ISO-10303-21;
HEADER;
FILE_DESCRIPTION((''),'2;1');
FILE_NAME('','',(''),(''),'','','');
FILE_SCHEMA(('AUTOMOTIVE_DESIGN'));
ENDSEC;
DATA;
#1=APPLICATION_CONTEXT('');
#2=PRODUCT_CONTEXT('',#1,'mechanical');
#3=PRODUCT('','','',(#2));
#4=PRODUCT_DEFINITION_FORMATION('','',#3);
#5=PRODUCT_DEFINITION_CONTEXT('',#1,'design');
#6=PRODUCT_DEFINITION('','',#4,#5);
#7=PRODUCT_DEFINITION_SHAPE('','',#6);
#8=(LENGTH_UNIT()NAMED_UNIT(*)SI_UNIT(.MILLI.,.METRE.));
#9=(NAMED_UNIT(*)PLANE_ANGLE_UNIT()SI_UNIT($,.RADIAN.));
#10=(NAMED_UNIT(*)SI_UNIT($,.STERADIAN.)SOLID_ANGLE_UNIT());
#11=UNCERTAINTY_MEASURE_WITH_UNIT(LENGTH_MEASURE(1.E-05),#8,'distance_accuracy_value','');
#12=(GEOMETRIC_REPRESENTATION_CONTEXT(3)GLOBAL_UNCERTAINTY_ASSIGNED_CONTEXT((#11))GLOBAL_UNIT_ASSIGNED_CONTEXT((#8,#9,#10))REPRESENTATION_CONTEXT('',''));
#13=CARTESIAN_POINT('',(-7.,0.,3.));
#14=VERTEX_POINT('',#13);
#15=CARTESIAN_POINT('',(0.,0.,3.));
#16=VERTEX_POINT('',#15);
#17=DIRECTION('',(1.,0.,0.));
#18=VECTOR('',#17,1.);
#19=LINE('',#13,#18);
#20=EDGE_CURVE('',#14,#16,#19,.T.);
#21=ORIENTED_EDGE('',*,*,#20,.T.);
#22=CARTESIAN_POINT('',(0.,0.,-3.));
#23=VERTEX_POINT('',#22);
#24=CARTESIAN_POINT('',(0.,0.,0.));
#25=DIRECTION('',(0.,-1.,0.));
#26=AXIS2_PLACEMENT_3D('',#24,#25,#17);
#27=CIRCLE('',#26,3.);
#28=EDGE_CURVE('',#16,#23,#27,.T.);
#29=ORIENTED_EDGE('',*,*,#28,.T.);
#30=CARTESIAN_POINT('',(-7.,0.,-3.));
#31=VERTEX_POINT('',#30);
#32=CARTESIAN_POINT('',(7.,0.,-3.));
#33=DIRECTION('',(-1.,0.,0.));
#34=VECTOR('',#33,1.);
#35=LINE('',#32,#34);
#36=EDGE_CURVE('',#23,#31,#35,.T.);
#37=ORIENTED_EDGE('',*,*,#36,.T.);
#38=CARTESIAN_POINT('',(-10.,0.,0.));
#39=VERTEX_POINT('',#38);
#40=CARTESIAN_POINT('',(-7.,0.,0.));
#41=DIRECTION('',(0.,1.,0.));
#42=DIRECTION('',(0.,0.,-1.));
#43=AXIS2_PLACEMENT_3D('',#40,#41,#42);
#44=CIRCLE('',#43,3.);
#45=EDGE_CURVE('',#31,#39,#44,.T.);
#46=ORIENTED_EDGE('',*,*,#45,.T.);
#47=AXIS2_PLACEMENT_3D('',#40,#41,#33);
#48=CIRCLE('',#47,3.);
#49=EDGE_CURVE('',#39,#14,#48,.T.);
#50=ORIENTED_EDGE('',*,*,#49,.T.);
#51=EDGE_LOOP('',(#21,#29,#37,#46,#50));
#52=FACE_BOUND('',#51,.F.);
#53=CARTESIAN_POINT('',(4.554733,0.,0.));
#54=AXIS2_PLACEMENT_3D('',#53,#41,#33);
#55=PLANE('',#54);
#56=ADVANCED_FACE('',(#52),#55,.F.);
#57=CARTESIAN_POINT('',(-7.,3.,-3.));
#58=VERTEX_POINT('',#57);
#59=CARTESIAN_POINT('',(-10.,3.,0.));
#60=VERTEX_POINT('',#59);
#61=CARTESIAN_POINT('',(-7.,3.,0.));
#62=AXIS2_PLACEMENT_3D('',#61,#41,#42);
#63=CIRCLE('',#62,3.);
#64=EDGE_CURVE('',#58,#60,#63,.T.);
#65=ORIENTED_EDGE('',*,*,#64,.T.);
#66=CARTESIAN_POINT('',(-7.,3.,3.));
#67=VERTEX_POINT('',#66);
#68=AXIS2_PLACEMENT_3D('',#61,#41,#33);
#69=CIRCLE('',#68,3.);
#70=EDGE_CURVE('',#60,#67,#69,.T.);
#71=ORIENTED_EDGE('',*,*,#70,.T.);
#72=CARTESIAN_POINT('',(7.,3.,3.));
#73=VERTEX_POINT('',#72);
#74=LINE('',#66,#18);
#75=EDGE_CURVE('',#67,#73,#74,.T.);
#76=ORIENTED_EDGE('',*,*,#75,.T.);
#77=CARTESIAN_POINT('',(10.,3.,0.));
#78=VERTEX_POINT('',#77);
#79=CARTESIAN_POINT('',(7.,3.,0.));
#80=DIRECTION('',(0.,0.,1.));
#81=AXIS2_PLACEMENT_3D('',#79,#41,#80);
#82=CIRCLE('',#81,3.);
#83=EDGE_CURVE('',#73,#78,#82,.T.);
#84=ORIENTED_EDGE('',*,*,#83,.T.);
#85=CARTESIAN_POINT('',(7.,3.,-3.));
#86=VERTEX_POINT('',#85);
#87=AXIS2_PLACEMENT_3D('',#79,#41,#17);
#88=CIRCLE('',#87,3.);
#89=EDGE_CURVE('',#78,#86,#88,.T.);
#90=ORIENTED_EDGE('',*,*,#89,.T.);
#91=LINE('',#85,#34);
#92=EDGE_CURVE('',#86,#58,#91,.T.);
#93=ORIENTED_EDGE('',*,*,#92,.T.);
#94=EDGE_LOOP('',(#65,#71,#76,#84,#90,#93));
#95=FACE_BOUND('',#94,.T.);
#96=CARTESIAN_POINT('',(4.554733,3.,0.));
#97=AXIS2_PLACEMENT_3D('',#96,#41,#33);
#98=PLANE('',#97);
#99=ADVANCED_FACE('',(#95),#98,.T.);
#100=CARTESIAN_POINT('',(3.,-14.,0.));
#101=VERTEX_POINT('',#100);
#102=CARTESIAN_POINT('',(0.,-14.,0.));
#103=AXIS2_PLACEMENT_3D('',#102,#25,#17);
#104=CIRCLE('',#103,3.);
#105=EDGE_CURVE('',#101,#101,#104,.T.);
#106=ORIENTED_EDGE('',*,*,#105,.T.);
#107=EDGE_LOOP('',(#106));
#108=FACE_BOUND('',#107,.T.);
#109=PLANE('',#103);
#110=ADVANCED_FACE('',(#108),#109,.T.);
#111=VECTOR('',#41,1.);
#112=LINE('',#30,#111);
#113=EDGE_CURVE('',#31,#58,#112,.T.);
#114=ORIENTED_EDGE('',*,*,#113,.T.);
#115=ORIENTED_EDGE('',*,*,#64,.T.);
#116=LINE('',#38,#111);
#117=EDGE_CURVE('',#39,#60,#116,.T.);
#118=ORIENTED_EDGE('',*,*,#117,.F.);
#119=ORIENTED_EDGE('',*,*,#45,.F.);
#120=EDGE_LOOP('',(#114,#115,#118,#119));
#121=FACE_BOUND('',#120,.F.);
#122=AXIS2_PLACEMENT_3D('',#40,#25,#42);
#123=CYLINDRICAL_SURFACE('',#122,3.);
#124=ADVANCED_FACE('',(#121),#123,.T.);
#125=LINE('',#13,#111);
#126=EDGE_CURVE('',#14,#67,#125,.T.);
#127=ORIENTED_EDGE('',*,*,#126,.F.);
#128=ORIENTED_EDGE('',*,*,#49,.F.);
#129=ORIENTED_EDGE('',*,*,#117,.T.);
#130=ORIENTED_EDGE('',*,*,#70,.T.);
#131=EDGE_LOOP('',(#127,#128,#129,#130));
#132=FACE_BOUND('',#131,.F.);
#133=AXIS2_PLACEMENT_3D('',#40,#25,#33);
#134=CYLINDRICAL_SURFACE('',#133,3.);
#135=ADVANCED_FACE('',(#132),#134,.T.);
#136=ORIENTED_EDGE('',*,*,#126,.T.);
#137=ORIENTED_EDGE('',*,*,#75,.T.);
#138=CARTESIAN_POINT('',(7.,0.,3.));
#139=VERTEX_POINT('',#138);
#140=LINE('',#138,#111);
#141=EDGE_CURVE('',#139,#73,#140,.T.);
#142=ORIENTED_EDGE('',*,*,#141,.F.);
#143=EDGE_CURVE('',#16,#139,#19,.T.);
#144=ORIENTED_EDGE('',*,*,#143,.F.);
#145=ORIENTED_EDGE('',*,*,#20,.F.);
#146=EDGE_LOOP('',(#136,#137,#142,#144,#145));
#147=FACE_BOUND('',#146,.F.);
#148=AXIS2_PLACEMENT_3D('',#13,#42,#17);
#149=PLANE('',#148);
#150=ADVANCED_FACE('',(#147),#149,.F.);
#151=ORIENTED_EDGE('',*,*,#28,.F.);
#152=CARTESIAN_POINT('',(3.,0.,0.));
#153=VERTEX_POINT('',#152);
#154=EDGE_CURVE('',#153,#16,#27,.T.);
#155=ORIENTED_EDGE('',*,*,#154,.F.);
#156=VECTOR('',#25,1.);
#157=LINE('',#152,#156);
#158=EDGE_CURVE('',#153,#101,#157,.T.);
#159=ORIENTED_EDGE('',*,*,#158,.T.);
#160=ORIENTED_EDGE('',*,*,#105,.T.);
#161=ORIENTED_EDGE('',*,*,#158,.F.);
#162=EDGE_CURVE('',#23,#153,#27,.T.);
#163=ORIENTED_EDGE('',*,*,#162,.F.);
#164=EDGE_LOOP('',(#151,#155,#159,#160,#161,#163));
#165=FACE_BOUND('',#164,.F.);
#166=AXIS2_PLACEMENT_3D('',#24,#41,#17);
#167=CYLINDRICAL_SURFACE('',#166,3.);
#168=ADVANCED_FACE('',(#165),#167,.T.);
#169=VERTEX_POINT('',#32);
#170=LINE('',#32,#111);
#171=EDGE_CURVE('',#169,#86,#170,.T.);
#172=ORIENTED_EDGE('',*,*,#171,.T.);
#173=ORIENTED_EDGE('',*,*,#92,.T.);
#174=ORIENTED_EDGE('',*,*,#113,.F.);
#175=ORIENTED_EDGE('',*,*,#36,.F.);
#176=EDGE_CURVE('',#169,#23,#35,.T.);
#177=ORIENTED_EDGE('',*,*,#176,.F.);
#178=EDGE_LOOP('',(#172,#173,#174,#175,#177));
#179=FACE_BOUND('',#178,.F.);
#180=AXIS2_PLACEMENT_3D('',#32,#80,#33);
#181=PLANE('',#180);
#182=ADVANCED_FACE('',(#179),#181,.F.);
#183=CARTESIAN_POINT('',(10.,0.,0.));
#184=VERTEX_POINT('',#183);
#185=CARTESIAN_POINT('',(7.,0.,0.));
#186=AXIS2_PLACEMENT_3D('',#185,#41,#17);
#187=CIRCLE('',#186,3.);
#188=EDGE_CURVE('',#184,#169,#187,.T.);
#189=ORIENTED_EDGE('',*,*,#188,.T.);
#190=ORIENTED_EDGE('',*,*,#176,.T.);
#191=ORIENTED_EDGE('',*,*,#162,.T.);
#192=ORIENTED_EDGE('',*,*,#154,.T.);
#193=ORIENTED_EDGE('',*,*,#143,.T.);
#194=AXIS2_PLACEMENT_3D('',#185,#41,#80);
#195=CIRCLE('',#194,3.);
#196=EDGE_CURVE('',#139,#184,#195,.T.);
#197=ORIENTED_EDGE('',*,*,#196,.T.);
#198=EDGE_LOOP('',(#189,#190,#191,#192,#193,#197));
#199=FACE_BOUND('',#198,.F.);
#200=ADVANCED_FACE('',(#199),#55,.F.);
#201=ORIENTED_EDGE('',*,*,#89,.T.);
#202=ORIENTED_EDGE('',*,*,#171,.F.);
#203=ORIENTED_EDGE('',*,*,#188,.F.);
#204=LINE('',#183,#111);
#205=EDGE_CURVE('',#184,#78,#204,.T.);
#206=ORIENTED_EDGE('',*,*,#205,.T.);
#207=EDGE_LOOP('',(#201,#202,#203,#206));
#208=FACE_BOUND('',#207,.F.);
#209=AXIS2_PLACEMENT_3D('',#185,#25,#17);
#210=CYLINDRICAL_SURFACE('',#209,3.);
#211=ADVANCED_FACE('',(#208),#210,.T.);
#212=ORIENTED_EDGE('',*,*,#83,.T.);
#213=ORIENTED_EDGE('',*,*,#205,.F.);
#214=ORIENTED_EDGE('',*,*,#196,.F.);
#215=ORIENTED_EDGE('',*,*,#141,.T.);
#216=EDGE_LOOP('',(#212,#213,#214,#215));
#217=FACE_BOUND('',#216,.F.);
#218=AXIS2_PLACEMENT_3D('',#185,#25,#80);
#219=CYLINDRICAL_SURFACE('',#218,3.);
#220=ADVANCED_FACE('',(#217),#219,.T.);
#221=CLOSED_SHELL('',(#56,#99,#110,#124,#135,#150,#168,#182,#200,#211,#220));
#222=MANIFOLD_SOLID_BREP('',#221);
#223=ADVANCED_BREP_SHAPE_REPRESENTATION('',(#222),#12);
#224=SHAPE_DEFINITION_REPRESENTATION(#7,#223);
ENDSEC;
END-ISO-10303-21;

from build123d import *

# Parameters (mm, degrees)
F0_R     = 3
F1_DEPTH = 14
F3_DEPTH = 3


with BuildPart() as f1:
    # F0 (on Front) → F1 (new body)
    with BuildSketch(Plane.XZ):
        Circle(F0_R)
    extrude(amount=F1_DEPTH)

    # F2 (on face) → F3 (join)
    with BuildSketch(Plane(origin=(0, 0, 0), x_dir=(-1, 0, 0), z_dir=(0, 1, 0))):
        with BuildLine():
            ThreePointArc((-10, 0), (-9.1213203436, -2.1213203436), (-7, -3))
            Line((-7, -3), (0, -3))
            ThreePointArc((0, -3), (-3, 0), (0, 3))
            Line((0, 3), (-7, 3))
            ThreePointArc((-7, 3), (-9.1213203436, 2.1213203436), (-10, 0))
        make_face()
        with BuildLine():
            ThreePointArc((3, 0), (2.1213203436, -2.1213203436), (0, -3))
            Line((0, -3), (7, -3))
            ThreePointArc((7, -3), (9.1213203436, -2.1213203436), (10, 0))
            ThreePointArc((10, 0), (9.1213203436, 2.1213203436), (7, 3))
            Line((7, 3), (0, 3))
            ThreePointArc((0, 3), (2.1213203436, 2.1213203436), (3, 0))
        make_face()
        with BuildLine():
            ThreePointArc((0, 3), (-3, 0), (0, -3))
            ThreePointArc((0, -3), (2.1213203436, -2.1213203436), (3, 0))
            ThreePointArc((3, 0), (2.1213203436, 2.1213203436), (0, 3))
        make_face()
    extrude(amount=F3_DEPTH)


solid = f1.part
